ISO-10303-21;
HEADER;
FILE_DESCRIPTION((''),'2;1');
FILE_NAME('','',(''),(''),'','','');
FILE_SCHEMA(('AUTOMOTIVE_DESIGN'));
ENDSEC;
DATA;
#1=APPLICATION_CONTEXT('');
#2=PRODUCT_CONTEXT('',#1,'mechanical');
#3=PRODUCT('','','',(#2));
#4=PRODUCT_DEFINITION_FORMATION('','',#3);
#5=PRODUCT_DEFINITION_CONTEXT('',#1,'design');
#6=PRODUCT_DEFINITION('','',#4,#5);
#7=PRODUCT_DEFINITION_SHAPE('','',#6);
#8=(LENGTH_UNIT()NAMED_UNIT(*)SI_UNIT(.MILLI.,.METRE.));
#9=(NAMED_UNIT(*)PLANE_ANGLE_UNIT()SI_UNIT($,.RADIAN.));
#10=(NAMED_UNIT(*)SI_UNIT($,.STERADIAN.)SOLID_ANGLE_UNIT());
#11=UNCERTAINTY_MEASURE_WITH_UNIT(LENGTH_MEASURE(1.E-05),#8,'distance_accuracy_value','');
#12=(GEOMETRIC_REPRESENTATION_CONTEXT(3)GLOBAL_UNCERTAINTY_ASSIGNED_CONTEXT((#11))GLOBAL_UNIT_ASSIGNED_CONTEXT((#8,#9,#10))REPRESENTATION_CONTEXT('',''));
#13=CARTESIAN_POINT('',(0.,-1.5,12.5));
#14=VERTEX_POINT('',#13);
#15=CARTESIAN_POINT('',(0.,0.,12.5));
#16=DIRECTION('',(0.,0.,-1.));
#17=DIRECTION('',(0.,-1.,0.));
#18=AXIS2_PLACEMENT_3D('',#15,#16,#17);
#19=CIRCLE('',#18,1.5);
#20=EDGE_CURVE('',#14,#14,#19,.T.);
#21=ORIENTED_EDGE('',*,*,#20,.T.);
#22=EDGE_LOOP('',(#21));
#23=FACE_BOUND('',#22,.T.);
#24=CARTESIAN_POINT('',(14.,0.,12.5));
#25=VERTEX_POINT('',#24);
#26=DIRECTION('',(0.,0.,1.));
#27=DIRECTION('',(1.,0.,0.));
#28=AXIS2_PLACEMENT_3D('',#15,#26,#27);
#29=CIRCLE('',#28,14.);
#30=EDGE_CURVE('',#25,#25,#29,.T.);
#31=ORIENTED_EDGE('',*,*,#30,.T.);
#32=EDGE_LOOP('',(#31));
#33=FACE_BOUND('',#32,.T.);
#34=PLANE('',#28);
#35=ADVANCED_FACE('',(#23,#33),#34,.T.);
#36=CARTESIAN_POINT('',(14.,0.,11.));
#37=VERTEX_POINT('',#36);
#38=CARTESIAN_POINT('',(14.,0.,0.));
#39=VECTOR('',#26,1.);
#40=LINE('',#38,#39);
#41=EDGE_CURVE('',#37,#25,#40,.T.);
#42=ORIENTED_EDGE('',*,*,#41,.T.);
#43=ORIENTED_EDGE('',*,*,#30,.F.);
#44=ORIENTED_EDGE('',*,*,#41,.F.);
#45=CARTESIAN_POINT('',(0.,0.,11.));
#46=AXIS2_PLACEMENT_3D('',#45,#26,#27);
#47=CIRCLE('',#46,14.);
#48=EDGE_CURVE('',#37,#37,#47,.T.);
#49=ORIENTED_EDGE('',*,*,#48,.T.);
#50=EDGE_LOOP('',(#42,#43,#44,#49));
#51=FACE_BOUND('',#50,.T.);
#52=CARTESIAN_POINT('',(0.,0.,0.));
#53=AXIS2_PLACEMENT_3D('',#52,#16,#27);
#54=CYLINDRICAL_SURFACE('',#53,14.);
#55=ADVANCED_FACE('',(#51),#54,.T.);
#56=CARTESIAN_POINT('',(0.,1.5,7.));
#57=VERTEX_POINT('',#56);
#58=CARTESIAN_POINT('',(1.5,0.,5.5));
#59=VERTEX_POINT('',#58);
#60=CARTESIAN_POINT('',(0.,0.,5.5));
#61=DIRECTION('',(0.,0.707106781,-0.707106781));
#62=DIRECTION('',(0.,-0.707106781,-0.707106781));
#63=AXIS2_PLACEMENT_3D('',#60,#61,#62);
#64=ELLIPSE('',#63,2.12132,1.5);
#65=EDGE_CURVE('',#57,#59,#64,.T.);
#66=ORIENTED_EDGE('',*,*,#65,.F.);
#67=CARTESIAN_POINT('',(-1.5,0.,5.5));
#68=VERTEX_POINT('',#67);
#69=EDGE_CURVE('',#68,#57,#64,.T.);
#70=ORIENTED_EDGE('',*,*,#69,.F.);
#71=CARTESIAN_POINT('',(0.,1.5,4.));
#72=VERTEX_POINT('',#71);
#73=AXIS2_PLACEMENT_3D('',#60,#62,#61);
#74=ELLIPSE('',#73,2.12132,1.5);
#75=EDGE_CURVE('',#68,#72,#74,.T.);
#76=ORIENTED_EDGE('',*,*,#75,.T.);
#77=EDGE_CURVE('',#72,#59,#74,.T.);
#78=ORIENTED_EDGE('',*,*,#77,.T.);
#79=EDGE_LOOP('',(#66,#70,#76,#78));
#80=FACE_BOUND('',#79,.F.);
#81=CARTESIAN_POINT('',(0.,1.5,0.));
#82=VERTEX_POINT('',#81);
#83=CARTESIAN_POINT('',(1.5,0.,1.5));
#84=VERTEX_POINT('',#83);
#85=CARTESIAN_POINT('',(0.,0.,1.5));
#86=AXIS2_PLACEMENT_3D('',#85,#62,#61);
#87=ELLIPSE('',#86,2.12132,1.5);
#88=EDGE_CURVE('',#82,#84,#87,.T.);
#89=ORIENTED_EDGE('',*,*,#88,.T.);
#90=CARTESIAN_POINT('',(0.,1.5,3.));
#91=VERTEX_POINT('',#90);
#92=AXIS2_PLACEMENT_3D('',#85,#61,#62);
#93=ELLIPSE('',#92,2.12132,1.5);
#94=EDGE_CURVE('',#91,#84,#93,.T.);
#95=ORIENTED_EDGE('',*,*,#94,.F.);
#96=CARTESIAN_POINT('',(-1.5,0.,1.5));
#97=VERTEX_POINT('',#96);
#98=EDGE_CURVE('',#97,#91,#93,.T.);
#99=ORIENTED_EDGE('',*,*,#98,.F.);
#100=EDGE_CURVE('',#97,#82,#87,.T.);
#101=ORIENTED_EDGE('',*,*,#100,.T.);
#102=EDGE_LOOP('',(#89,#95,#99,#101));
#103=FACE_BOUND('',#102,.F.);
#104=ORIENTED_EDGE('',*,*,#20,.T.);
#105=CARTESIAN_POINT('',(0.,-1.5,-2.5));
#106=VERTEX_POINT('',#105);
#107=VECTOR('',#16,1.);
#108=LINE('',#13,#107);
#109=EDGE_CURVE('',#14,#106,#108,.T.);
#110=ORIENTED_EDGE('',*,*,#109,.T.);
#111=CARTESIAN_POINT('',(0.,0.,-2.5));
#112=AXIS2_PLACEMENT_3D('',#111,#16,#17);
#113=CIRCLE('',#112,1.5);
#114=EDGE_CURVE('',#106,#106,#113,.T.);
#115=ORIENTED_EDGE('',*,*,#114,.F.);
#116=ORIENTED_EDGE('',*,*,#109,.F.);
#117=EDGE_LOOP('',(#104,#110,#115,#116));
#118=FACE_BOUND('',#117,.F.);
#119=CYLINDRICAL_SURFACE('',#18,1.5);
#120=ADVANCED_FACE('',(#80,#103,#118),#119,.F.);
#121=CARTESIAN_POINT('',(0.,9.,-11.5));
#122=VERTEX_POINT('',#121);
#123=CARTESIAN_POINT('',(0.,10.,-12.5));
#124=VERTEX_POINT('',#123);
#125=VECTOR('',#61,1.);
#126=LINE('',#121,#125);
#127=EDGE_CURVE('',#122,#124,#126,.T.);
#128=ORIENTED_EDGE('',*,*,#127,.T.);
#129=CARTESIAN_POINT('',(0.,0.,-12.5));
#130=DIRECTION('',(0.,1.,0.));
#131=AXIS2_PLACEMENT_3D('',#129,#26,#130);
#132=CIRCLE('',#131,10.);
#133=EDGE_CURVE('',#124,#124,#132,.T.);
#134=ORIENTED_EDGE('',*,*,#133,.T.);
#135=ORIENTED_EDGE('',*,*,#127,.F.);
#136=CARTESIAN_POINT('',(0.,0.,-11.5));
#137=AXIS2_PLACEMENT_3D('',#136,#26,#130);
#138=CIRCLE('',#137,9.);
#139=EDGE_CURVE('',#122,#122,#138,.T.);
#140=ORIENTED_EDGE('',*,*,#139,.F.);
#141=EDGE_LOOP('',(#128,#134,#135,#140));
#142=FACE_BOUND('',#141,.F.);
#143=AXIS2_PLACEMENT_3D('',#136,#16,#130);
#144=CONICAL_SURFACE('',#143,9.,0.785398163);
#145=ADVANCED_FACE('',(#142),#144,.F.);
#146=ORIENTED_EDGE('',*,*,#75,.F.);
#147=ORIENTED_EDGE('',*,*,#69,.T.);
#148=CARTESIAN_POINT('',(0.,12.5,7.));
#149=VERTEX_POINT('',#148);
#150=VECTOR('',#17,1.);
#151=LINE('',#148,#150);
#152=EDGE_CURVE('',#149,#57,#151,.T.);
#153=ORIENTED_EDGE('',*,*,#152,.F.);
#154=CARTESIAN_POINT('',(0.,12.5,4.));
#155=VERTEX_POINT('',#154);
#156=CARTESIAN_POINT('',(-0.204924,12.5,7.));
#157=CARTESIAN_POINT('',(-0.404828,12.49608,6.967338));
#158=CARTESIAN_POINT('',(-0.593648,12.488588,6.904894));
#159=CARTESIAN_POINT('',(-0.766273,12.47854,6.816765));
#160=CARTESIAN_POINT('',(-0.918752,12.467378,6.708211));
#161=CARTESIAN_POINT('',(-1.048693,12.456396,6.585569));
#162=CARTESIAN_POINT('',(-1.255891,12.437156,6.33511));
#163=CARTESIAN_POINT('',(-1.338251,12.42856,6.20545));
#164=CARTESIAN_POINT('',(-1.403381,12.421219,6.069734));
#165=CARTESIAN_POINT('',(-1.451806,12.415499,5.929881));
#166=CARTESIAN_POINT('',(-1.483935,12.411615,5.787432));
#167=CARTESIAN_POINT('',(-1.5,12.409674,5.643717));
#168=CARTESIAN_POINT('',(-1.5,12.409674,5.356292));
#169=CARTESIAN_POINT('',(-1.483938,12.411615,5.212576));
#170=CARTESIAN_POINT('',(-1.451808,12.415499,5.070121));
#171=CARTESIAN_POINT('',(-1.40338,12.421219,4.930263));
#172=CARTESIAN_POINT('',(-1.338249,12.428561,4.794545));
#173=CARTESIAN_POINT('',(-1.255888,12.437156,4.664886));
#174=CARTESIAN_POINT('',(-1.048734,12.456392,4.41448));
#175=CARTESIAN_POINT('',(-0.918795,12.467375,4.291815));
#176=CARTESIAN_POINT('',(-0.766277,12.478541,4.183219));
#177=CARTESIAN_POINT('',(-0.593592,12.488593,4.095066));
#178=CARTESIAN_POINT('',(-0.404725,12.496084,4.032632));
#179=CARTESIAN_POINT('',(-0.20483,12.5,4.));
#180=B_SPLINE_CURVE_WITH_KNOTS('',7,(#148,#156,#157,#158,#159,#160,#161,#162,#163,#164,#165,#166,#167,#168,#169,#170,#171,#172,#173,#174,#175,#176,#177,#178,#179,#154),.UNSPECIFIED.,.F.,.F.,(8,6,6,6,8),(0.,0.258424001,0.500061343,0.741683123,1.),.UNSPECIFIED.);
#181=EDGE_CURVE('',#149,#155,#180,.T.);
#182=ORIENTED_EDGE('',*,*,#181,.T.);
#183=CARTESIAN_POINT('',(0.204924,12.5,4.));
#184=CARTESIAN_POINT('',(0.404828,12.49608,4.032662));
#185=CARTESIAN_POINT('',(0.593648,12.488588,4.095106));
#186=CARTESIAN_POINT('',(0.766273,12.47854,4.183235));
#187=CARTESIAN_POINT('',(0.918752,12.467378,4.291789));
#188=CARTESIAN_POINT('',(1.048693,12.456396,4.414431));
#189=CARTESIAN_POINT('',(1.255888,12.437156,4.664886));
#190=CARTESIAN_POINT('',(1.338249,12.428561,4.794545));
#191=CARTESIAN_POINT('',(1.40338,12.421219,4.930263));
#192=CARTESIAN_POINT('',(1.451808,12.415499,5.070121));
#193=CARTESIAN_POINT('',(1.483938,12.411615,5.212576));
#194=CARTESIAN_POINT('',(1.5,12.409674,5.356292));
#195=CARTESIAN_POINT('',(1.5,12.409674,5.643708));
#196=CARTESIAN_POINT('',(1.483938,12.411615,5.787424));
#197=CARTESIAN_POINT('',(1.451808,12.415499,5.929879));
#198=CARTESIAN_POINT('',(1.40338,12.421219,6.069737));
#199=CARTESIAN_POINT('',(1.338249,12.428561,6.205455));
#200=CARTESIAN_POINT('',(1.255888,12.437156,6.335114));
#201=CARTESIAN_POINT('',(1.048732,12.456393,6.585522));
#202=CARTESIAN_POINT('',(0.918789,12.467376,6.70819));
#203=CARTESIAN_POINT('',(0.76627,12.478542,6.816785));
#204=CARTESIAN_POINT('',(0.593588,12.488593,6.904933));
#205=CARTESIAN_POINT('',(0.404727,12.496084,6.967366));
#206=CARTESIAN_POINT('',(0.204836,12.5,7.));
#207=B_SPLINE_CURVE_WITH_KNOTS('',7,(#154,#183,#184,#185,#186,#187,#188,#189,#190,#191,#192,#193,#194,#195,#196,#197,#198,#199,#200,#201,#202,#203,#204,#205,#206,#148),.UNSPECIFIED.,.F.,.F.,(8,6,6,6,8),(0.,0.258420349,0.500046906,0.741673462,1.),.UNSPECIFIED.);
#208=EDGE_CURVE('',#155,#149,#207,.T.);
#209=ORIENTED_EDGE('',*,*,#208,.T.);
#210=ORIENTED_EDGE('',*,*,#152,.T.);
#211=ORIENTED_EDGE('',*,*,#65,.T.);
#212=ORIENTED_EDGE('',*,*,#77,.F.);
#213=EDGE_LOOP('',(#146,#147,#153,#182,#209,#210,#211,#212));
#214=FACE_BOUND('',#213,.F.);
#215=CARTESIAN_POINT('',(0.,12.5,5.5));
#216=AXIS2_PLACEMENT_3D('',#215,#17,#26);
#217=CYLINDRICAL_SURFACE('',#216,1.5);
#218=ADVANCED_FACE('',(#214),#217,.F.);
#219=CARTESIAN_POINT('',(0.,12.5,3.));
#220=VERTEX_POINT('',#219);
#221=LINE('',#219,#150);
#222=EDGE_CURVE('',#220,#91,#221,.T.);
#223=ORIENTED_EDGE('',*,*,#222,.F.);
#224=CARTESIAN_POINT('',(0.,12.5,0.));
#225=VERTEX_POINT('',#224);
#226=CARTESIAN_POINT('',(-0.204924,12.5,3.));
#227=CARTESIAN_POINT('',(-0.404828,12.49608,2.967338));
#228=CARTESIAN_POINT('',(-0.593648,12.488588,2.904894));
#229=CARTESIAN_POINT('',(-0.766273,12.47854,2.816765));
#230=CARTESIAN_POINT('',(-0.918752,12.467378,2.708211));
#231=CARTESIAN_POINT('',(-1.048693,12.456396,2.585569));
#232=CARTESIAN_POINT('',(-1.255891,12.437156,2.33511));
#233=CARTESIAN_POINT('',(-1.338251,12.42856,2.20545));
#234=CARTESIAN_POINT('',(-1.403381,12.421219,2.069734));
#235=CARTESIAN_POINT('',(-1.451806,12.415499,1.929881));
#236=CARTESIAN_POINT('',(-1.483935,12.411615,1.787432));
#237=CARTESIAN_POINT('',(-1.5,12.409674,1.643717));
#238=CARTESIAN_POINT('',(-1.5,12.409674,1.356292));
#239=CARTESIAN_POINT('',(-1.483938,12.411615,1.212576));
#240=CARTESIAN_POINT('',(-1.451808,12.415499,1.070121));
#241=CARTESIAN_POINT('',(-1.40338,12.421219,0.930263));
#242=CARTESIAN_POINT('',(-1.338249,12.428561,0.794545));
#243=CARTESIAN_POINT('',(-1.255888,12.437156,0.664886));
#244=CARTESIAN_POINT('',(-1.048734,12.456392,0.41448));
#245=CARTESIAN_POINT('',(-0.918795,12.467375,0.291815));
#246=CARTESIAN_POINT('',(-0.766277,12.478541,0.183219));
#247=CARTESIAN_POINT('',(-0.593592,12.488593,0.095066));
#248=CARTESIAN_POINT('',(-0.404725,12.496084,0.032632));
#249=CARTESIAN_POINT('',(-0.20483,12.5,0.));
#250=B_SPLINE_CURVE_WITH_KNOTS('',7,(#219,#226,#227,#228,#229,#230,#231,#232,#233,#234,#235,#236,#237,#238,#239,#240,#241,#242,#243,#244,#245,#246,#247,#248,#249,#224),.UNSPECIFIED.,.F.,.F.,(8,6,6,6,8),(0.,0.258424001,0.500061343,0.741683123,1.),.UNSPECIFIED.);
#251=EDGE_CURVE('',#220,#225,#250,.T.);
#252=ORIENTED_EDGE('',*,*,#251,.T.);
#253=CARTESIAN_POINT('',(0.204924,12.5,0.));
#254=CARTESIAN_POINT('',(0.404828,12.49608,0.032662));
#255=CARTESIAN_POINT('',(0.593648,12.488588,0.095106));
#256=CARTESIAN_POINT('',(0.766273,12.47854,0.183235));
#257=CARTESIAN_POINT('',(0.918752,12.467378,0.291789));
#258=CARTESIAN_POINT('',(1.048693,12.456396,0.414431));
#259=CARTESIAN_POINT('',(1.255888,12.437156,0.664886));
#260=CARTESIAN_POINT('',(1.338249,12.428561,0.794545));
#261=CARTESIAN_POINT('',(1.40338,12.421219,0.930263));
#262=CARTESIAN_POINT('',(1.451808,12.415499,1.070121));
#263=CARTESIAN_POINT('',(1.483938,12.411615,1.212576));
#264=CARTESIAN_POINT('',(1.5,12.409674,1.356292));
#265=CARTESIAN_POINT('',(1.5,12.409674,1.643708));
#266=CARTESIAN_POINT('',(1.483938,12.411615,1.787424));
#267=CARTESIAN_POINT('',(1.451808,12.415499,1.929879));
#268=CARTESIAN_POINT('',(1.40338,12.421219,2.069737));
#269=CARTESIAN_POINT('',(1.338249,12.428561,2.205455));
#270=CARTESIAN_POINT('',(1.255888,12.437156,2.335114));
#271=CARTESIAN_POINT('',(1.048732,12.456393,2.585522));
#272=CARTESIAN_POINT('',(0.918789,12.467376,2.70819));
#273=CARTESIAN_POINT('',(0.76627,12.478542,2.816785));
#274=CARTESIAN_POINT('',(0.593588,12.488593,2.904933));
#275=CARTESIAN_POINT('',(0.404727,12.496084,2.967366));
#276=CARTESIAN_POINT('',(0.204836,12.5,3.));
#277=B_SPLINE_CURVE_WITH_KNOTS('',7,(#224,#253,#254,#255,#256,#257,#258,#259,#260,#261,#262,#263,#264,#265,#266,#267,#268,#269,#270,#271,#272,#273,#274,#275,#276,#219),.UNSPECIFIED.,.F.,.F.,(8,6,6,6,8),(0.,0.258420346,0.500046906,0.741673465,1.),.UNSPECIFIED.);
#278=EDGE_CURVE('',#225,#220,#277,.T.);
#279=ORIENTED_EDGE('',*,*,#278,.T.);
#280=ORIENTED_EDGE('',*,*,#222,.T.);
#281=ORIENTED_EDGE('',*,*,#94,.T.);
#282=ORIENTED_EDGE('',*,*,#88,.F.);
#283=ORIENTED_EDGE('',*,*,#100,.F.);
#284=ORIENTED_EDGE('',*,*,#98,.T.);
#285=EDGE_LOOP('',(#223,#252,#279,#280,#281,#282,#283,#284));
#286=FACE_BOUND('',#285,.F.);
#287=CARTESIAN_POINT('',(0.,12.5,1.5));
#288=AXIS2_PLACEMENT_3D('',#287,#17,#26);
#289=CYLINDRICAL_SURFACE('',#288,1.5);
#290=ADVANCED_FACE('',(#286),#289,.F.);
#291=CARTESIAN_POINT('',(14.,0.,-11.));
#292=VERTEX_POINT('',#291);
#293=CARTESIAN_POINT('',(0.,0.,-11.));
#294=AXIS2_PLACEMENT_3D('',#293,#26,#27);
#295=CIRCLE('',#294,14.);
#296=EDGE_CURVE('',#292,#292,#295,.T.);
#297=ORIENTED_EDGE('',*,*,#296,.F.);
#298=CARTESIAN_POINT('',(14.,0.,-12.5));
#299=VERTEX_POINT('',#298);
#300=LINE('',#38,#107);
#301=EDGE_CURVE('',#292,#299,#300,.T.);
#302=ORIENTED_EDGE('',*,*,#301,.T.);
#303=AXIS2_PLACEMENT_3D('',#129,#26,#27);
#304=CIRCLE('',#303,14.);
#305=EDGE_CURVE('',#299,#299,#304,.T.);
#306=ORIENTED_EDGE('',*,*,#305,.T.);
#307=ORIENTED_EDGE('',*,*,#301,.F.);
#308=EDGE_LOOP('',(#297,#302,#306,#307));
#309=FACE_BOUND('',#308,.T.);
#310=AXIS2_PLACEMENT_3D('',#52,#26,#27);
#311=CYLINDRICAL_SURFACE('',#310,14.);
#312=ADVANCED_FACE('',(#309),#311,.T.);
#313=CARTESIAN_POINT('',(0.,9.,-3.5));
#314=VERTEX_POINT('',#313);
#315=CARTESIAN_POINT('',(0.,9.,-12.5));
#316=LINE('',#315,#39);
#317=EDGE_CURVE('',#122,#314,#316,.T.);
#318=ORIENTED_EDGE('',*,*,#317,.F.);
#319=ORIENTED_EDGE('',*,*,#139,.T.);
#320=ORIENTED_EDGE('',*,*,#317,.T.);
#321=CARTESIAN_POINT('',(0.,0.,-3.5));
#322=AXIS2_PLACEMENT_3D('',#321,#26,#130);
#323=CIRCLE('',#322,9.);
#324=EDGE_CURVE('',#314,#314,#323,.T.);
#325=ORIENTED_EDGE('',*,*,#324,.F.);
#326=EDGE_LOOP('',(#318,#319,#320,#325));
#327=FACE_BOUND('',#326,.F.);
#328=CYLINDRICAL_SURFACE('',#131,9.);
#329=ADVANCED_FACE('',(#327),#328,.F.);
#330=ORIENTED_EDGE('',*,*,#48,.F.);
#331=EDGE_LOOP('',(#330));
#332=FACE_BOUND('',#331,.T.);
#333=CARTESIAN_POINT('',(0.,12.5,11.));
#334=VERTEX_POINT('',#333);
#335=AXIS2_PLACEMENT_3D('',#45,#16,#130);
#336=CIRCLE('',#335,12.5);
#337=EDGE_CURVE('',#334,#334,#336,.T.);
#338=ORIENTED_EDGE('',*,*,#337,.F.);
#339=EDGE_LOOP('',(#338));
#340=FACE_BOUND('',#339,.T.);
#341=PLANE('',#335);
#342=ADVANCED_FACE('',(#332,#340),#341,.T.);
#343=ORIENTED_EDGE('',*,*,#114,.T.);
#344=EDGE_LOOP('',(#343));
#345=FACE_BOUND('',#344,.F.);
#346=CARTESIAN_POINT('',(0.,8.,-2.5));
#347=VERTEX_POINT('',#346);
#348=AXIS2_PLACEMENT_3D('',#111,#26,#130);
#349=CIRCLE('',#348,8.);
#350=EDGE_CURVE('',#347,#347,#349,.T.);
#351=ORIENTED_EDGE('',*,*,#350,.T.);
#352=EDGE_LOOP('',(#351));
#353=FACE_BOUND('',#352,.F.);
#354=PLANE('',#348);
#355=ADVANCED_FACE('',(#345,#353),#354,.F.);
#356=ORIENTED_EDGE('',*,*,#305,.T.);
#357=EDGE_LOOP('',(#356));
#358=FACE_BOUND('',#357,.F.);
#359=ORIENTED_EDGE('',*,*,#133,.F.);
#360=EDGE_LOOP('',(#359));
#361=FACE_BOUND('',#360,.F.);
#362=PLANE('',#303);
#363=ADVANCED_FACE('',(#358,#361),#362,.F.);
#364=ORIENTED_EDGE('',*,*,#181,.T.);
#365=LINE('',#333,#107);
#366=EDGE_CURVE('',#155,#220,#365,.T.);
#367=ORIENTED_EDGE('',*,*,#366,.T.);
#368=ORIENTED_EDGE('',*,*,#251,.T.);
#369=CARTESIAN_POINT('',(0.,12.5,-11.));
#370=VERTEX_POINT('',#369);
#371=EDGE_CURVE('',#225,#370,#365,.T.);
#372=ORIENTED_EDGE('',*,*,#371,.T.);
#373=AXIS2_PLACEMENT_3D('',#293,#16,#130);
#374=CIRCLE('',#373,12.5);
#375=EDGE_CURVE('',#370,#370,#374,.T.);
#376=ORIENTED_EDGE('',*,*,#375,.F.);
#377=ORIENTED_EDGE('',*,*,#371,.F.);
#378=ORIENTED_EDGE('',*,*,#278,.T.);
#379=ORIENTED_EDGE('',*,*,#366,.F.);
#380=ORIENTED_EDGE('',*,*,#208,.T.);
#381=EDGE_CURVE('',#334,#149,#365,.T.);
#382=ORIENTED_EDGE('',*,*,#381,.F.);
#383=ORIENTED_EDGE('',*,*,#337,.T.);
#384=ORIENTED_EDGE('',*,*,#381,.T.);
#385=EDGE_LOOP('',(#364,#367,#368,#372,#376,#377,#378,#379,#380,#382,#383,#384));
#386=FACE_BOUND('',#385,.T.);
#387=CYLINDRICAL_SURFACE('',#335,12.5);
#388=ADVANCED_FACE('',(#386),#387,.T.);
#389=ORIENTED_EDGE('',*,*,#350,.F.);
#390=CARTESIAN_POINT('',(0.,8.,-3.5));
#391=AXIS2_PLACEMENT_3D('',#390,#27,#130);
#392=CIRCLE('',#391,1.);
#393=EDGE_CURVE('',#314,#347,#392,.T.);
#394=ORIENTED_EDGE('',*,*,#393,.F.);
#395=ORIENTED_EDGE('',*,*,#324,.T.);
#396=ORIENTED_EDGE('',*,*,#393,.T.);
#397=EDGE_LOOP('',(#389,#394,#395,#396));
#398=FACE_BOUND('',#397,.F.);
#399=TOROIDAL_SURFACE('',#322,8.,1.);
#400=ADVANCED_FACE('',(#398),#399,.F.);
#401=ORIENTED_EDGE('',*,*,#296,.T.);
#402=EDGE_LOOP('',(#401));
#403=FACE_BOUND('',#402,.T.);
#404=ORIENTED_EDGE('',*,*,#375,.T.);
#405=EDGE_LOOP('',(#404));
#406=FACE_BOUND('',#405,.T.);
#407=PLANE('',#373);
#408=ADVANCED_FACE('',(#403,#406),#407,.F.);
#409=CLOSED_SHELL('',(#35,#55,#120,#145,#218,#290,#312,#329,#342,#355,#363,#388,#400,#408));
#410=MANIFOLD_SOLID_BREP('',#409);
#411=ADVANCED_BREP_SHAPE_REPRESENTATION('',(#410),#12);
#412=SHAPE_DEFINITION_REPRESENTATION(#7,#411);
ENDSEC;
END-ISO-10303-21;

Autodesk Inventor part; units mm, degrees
ref_plane "YZ Plane" through (0, 0, 0) normal (1, 0, 0) x (0, 1, 0)
ref_plane "XZ Plane" through (0, 0, 0) normal (0, 1, 0) x (-1, 0, 0)
sketch "Náčrt1" plane through (0, 0, 0) normal (0, 0, 1) x (1, 0, 0)
  circle A0 centre (0, 0) radius 14
  dimension "d0" = 28
extrude "Vysunutí1" add sketch "Náčrt1" along normal mid plane 25
sketch "Náčrt2" plane through (0, 0, 0) normal (1, 0, 0) x (0, 1, 0)
  line L0 (-14, -12.5) -> (14, -12.5) projected
  line L1 (14, 12.5) -> (-14, 12.5) projected
  line L2 (14, -12.5) -> (14, 12.5) projected
  line L3 (14, 11) -> (12.5, 11)
  line L4 (12.5, 11) -> (12.5, -11)
  line L5 (12.5, -11) -> (14, -11)
  line L6 (14, -11) -> (14, 11)
  line L7 (14, 0) -> (-14, 0) construction
  line L8 (-14, -12.5) -> (-14, 12.5) projected
  line L9 (0, 12.5) -> (0, -12.5) construction
  point P0 (0, 0)
  point P1 (14, -11)
  dimension "d4" = 11
  dimension "d5" = 12.5
revolve "Rotace1" cut sketch "Náčrt2" angle 360 about axis through (0, 0, 12.5) along (0, 0, -1) contours L5 L4 L3 L2
sketch "Náčrt3" plane through (0, 0, -12.5) normal (0, 0, -1) x (-1, 0, 0)
  line L0 (-6, 5) -> (6, 5)
  line L1 (6, 5) -> (6, -5)
  line L2 (6, -5) -> (-6, -5)
  line L3 (-6, -5) -> (-6, 5)
  line L4 (-6, 5) -> (6, -5) construction
  line L5 (6, 5) -> (-6, -5) construction
  circle A0 centre (0, 0) radius 9
  dimension "d7" = 12
  dimension "d8" = 10
  dimension "d9" = 18
hole "Díra1" at (0, 0, -12.5) direction (0, 0, 1) diameter 18 depth 10
sketch "Náčrt4" plane through (0, 0, 12.5) normal (0, 0, 1) x (1, 0, 0)
  circle A0 centre (0, 0) radius 14 projected
hole "Díra2" at (0, 0, 12.5) direction (0, 0, -1) diameter 3 end through all
ref_plane "Pracovní rovina1" through (0, 12.5, 0) normal (0, -1, 0) x (1, 0, 0)
sketch "Náčrt5" plane through (0, 12.5, 0) normal (0, -1, 0) x (1, 0, 0)
  line L0 (1.5, -2.5) -> (-1.5, -2.5) projected
  line L1 (-9, -2.5) -> (9, -2.5) projected
  line L2 (0, 0) -> (0, -10.7479) construction
  point P0 (0, 1.5)
  point P1 (0, 5.5)
  dimension "d24" = 4
  dimension "d25" = 4
hole "Díra3" at (0, 12.5, 1.5) at (0, 12.5, 5.5) direction (0, -1, 0) diameter 3 depth 12.5
thread "Závit1" size "M3x0.5" class "6H" standard "ISO Metric profile" full length
thread "Závit2" size "M3x0.5" class "6H" standard "ISO Metric profile" full length
chamfer "Zkosení1" distance 1 angle 45 1 edges at (0, -9, -12.5)
fillet "Zaoblení1" radius 1 1 edges at (0, -9, -2.5)
properties part number "Wheel"
